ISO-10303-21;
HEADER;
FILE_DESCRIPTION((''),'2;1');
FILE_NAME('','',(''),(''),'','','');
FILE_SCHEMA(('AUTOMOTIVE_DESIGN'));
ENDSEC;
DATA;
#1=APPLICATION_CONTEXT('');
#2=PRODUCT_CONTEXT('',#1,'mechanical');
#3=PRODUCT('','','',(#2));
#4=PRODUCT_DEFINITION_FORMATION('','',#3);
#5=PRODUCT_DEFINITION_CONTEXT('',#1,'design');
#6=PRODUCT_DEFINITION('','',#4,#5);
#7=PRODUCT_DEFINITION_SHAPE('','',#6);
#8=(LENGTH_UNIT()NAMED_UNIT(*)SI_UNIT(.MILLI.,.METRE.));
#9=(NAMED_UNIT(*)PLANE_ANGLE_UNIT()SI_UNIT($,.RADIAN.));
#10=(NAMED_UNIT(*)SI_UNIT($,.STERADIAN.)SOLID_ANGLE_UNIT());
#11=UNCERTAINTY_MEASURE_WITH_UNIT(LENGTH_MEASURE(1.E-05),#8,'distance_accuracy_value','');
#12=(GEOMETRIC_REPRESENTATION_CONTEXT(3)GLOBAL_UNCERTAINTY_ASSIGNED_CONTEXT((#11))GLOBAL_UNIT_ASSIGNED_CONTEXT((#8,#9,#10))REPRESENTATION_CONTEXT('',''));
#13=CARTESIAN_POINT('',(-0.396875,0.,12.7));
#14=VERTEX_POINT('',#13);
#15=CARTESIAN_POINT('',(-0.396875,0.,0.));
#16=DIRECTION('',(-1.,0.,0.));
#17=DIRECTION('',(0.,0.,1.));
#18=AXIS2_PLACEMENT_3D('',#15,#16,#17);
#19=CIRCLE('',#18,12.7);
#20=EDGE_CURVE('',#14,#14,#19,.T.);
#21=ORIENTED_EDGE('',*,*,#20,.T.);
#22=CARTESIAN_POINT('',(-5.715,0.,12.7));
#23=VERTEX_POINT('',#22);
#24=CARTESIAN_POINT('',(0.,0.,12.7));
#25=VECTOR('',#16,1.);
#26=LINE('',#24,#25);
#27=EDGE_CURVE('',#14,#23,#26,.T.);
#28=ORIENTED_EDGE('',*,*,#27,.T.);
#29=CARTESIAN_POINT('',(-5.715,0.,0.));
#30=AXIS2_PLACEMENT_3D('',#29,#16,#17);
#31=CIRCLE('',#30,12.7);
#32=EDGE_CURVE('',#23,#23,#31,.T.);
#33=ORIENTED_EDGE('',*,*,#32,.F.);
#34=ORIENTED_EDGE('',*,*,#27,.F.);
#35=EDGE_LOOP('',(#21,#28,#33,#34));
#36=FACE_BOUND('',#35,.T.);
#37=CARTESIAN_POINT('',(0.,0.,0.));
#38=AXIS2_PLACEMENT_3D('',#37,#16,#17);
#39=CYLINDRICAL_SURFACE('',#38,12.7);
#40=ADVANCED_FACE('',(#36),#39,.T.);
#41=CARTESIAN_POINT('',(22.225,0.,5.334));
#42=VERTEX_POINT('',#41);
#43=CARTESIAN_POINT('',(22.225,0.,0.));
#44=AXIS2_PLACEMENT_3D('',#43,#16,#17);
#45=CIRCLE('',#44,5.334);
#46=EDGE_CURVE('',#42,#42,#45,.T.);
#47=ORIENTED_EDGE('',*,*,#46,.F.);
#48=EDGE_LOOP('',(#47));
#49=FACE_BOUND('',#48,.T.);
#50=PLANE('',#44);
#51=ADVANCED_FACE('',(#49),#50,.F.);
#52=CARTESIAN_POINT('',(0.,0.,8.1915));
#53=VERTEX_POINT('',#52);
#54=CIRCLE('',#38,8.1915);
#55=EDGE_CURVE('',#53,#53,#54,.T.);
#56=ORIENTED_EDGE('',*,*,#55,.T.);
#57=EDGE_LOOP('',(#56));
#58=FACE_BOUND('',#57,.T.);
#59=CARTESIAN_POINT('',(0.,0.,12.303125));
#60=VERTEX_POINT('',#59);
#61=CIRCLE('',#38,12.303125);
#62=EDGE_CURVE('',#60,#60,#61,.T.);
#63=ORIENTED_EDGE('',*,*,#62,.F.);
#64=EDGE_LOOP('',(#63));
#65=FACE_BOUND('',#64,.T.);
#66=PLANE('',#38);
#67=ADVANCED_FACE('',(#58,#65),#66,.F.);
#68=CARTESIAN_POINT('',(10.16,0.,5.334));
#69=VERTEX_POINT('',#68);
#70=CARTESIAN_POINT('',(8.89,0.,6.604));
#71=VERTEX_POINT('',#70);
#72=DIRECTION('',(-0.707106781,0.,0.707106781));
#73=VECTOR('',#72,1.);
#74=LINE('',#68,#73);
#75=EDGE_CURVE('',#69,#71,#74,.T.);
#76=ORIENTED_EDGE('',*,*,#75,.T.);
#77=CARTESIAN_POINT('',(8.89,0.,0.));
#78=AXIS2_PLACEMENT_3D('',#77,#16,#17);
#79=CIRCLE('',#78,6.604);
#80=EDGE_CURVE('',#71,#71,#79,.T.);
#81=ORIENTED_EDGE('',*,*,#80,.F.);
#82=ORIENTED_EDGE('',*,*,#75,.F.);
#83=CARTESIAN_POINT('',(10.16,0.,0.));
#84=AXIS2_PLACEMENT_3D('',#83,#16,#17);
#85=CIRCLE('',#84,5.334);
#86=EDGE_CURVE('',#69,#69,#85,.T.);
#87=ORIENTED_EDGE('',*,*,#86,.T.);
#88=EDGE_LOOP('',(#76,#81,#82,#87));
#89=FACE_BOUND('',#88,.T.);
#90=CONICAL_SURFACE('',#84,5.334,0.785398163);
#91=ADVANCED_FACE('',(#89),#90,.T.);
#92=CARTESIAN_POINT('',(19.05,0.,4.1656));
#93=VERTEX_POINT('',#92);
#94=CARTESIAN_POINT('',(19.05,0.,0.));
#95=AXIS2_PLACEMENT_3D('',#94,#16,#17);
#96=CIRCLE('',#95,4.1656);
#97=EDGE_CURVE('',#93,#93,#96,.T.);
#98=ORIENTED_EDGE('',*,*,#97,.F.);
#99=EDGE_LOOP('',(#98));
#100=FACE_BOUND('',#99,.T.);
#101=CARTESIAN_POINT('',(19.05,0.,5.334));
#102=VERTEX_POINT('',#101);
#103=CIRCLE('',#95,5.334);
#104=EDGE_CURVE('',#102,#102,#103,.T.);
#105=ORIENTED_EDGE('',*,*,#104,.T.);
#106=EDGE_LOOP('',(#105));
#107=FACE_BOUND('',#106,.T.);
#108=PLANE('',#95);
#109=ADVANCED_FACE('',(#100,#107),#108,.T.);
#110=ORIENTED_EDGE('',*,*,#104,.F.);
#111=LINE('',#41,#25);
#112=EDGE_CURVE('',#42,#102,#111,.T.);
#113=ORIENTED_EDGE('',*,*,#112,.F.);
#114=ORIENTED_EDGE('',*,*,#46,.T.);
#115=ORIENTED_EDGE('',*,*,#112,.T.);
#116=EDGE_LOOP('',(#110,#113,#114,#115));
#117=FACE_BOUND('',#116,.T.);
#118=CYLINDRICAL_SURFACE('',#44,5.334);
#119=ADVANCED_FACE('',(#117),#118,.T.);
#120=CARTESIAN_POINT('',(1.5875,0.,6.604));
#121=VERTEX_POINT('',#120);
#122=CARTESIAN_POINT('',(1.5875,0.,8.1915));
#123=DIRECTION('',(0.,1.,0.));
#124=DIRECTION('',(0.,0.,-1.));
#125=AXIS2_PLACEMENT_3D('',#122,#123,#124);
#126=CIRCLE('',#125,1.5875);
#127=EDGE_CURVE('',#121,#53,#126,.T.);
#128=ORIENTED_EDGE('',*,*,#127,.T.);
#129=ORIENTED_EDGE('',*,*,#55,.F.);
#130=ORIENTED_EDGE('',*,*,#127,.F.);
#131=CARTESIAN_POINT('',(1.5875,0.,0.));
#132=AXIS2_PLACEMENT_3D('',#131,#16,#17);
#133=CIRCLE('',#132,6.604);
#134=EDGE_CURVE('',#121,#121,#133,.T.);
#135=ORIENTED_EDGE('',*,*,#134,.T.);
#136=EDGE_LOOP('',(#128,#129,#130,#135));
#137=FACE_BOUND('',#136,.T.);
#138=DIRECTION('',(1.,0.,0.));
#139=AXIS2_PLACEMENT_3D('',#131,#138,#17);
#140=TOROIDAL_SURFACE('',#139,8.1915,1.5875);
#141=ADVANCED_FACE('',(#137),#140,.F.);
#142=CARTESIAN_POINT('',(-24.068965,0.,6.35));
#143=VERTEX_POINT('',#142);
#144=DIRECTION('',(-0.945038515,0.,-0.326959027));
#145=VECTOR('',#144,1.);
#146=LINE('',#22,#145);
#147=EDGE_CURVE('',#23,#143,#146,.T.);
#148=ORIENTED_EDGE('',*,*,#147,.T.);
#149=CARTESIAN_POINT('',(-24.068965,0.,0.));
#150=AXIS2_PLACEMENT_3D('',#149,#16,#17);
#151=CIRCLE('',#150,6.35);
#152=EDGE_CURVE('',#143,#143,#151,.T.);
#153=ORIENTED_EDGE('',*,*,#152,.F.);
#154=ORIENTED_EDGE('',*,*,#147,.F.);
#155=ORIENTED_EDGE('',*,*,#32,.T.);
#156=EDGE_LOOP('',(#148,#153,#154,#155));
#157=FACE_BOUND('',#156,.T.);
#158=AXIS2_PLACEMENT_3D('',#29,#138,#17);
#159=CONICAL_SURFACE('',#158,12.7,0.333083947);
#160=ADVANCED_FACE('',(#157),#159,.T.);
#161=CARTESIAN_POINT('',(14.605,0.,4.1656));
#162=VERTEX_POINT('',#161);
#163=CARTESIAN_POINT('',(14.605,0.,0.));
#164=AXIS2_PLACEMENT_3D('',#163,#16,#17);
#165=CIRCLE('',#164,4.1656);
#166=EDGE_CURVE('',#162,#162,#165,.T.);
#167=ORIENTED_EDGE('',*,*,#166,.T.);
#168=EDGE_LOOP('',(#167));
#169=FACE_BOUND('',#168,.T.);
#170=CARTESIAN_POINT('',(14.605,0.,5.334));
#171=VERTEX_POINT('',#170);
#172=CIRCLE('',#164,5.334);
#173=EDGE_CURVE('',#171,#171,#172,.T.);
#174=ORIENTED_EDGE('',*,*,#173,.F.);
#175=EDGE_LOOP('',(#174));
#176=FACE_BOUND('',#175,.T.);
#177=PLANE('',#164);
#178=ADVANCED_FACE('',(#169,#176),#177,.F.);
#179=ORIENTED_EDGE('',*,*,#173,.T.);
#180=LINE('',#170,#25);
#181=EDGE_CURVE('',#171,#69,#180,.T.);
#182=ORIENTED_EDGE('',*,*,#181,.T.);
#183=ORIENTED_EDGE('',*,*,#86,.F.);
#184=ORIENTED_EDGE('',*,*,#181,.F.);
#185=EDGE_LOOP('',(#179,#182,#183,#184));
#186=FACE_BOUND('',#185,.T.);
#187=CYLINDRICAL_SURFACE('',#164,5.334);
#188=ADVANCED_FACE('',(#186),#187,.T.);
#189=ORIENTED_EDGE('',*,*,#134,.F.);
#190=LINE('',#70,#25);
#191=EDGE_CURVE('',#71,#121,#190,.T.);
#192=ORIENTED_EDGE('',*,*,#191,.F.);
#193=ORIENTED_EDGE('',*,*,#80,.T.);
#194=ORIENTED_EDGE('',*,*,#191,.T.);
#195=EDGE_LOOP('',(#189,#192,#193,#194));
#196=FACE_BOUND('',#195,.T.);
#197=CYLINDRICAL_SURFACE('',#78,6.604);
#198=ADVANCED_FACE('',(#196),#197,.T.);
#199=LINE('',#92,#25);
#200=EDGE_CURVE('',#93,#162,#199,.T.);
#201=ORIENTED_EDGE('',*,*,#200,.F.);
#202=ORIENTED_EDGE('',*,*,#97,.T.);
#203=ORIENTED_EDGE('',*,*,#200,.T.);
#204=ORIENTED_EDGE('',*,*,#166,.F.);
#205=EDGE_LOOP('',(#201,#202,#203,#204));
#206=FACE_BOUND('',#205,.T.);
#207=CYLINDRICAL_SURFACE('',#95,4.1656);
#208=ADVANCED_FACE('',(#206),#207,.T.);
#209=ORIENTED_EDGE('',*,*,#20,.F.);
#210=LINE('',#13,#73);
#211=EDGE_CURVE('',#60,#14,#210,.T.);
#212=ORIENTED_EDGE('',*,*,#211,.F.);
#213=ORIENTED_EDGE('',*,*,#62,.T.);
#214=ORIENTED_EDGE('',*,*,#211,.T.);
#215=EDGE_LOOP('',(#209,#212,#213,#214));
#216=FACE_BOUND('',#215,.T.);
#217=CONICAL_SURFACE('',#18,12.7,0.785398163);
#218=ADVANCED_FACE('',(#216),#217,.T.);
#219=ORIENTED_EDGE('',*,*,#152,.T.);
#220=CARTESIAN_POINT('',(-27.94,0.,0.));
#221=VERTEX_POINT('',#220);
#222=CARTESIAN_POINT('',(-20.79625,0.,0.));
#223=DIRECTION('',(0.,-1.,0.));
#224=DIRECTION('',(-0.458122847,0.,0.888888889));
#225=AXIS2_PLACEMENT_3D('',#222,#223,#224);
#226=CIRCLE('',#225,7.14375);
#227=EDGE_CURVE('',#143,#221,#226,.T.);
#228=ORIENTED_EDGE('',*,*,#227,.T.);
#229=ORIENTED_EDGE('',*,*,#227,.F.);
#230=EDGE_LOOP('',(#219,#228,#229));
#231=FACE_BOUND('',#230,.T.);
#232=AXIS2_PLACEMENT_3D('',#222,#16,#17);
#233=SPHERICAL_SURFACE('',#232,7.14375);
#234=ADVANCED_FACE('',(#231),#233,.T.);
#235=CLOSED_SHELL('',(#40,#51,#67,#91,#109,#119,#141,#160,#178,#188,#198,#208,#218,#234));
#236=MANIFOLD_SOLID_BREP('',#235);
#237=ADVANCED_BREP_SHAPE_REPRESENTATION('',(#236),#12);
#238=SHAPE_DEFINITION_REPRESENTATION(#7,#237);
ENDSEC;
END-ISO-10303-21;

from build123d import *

# Parameters (mm, degrees)
F2_SIZE = 0.396875


# Not quite as in the source:
# - a feature names something its author has since deleted; it is built from what else it names


with BuildPart() as f1:
    # F0 (on Front) → F1 (revolve)
    with BuildSketch(Plane.XZ):
        with BuildLine():
            Line((0, 8.1915), (0, 12.7))
            Line((0, 12.7), (-5.715, 12.7))
            Line((-5.715, 12.7), (-24.0689650903, 6.35))
            ThreePointArc((-24.0689650903, 6.35), (-26.8959476355, 3.7184476355), (-27.94, 0))
            Line((-27.94, 0), (22.225, 0))
            Line((22.225, 0), (22.225, 5.334))
            Line((22.225, 5.334), (19.05, 5.334))
            Line((19.05, 5.334), (19.05, 4.1656))
            Line((19.05, 4.1656), (14.605, 4.1656))
            Line((14.605, 4.1656), (14.605, 5.334))
            Line((14.605, 5.334), (10.16, 5.334))
            Line((10.16, 5.334), (8.89, 6.604))
            Line((8.89, 6.604), (1.5875, 6.604))
            ThreePointArc((1.5875, 6.604), (0.4649679849, 7.0689679849), (0, 8.1915))
        make_face()
    revolve(axis=Axis((-2.8575, 0, 0), (-1, 0, 0)))

    # F2
    f2_edges = [f1.edges().sort_by_distance(p)[0] for p in [
        (0, 0, -12.7),
    ]]
    chamfer(f2_edges, length=F2_SIZE)


solid = f1.part
